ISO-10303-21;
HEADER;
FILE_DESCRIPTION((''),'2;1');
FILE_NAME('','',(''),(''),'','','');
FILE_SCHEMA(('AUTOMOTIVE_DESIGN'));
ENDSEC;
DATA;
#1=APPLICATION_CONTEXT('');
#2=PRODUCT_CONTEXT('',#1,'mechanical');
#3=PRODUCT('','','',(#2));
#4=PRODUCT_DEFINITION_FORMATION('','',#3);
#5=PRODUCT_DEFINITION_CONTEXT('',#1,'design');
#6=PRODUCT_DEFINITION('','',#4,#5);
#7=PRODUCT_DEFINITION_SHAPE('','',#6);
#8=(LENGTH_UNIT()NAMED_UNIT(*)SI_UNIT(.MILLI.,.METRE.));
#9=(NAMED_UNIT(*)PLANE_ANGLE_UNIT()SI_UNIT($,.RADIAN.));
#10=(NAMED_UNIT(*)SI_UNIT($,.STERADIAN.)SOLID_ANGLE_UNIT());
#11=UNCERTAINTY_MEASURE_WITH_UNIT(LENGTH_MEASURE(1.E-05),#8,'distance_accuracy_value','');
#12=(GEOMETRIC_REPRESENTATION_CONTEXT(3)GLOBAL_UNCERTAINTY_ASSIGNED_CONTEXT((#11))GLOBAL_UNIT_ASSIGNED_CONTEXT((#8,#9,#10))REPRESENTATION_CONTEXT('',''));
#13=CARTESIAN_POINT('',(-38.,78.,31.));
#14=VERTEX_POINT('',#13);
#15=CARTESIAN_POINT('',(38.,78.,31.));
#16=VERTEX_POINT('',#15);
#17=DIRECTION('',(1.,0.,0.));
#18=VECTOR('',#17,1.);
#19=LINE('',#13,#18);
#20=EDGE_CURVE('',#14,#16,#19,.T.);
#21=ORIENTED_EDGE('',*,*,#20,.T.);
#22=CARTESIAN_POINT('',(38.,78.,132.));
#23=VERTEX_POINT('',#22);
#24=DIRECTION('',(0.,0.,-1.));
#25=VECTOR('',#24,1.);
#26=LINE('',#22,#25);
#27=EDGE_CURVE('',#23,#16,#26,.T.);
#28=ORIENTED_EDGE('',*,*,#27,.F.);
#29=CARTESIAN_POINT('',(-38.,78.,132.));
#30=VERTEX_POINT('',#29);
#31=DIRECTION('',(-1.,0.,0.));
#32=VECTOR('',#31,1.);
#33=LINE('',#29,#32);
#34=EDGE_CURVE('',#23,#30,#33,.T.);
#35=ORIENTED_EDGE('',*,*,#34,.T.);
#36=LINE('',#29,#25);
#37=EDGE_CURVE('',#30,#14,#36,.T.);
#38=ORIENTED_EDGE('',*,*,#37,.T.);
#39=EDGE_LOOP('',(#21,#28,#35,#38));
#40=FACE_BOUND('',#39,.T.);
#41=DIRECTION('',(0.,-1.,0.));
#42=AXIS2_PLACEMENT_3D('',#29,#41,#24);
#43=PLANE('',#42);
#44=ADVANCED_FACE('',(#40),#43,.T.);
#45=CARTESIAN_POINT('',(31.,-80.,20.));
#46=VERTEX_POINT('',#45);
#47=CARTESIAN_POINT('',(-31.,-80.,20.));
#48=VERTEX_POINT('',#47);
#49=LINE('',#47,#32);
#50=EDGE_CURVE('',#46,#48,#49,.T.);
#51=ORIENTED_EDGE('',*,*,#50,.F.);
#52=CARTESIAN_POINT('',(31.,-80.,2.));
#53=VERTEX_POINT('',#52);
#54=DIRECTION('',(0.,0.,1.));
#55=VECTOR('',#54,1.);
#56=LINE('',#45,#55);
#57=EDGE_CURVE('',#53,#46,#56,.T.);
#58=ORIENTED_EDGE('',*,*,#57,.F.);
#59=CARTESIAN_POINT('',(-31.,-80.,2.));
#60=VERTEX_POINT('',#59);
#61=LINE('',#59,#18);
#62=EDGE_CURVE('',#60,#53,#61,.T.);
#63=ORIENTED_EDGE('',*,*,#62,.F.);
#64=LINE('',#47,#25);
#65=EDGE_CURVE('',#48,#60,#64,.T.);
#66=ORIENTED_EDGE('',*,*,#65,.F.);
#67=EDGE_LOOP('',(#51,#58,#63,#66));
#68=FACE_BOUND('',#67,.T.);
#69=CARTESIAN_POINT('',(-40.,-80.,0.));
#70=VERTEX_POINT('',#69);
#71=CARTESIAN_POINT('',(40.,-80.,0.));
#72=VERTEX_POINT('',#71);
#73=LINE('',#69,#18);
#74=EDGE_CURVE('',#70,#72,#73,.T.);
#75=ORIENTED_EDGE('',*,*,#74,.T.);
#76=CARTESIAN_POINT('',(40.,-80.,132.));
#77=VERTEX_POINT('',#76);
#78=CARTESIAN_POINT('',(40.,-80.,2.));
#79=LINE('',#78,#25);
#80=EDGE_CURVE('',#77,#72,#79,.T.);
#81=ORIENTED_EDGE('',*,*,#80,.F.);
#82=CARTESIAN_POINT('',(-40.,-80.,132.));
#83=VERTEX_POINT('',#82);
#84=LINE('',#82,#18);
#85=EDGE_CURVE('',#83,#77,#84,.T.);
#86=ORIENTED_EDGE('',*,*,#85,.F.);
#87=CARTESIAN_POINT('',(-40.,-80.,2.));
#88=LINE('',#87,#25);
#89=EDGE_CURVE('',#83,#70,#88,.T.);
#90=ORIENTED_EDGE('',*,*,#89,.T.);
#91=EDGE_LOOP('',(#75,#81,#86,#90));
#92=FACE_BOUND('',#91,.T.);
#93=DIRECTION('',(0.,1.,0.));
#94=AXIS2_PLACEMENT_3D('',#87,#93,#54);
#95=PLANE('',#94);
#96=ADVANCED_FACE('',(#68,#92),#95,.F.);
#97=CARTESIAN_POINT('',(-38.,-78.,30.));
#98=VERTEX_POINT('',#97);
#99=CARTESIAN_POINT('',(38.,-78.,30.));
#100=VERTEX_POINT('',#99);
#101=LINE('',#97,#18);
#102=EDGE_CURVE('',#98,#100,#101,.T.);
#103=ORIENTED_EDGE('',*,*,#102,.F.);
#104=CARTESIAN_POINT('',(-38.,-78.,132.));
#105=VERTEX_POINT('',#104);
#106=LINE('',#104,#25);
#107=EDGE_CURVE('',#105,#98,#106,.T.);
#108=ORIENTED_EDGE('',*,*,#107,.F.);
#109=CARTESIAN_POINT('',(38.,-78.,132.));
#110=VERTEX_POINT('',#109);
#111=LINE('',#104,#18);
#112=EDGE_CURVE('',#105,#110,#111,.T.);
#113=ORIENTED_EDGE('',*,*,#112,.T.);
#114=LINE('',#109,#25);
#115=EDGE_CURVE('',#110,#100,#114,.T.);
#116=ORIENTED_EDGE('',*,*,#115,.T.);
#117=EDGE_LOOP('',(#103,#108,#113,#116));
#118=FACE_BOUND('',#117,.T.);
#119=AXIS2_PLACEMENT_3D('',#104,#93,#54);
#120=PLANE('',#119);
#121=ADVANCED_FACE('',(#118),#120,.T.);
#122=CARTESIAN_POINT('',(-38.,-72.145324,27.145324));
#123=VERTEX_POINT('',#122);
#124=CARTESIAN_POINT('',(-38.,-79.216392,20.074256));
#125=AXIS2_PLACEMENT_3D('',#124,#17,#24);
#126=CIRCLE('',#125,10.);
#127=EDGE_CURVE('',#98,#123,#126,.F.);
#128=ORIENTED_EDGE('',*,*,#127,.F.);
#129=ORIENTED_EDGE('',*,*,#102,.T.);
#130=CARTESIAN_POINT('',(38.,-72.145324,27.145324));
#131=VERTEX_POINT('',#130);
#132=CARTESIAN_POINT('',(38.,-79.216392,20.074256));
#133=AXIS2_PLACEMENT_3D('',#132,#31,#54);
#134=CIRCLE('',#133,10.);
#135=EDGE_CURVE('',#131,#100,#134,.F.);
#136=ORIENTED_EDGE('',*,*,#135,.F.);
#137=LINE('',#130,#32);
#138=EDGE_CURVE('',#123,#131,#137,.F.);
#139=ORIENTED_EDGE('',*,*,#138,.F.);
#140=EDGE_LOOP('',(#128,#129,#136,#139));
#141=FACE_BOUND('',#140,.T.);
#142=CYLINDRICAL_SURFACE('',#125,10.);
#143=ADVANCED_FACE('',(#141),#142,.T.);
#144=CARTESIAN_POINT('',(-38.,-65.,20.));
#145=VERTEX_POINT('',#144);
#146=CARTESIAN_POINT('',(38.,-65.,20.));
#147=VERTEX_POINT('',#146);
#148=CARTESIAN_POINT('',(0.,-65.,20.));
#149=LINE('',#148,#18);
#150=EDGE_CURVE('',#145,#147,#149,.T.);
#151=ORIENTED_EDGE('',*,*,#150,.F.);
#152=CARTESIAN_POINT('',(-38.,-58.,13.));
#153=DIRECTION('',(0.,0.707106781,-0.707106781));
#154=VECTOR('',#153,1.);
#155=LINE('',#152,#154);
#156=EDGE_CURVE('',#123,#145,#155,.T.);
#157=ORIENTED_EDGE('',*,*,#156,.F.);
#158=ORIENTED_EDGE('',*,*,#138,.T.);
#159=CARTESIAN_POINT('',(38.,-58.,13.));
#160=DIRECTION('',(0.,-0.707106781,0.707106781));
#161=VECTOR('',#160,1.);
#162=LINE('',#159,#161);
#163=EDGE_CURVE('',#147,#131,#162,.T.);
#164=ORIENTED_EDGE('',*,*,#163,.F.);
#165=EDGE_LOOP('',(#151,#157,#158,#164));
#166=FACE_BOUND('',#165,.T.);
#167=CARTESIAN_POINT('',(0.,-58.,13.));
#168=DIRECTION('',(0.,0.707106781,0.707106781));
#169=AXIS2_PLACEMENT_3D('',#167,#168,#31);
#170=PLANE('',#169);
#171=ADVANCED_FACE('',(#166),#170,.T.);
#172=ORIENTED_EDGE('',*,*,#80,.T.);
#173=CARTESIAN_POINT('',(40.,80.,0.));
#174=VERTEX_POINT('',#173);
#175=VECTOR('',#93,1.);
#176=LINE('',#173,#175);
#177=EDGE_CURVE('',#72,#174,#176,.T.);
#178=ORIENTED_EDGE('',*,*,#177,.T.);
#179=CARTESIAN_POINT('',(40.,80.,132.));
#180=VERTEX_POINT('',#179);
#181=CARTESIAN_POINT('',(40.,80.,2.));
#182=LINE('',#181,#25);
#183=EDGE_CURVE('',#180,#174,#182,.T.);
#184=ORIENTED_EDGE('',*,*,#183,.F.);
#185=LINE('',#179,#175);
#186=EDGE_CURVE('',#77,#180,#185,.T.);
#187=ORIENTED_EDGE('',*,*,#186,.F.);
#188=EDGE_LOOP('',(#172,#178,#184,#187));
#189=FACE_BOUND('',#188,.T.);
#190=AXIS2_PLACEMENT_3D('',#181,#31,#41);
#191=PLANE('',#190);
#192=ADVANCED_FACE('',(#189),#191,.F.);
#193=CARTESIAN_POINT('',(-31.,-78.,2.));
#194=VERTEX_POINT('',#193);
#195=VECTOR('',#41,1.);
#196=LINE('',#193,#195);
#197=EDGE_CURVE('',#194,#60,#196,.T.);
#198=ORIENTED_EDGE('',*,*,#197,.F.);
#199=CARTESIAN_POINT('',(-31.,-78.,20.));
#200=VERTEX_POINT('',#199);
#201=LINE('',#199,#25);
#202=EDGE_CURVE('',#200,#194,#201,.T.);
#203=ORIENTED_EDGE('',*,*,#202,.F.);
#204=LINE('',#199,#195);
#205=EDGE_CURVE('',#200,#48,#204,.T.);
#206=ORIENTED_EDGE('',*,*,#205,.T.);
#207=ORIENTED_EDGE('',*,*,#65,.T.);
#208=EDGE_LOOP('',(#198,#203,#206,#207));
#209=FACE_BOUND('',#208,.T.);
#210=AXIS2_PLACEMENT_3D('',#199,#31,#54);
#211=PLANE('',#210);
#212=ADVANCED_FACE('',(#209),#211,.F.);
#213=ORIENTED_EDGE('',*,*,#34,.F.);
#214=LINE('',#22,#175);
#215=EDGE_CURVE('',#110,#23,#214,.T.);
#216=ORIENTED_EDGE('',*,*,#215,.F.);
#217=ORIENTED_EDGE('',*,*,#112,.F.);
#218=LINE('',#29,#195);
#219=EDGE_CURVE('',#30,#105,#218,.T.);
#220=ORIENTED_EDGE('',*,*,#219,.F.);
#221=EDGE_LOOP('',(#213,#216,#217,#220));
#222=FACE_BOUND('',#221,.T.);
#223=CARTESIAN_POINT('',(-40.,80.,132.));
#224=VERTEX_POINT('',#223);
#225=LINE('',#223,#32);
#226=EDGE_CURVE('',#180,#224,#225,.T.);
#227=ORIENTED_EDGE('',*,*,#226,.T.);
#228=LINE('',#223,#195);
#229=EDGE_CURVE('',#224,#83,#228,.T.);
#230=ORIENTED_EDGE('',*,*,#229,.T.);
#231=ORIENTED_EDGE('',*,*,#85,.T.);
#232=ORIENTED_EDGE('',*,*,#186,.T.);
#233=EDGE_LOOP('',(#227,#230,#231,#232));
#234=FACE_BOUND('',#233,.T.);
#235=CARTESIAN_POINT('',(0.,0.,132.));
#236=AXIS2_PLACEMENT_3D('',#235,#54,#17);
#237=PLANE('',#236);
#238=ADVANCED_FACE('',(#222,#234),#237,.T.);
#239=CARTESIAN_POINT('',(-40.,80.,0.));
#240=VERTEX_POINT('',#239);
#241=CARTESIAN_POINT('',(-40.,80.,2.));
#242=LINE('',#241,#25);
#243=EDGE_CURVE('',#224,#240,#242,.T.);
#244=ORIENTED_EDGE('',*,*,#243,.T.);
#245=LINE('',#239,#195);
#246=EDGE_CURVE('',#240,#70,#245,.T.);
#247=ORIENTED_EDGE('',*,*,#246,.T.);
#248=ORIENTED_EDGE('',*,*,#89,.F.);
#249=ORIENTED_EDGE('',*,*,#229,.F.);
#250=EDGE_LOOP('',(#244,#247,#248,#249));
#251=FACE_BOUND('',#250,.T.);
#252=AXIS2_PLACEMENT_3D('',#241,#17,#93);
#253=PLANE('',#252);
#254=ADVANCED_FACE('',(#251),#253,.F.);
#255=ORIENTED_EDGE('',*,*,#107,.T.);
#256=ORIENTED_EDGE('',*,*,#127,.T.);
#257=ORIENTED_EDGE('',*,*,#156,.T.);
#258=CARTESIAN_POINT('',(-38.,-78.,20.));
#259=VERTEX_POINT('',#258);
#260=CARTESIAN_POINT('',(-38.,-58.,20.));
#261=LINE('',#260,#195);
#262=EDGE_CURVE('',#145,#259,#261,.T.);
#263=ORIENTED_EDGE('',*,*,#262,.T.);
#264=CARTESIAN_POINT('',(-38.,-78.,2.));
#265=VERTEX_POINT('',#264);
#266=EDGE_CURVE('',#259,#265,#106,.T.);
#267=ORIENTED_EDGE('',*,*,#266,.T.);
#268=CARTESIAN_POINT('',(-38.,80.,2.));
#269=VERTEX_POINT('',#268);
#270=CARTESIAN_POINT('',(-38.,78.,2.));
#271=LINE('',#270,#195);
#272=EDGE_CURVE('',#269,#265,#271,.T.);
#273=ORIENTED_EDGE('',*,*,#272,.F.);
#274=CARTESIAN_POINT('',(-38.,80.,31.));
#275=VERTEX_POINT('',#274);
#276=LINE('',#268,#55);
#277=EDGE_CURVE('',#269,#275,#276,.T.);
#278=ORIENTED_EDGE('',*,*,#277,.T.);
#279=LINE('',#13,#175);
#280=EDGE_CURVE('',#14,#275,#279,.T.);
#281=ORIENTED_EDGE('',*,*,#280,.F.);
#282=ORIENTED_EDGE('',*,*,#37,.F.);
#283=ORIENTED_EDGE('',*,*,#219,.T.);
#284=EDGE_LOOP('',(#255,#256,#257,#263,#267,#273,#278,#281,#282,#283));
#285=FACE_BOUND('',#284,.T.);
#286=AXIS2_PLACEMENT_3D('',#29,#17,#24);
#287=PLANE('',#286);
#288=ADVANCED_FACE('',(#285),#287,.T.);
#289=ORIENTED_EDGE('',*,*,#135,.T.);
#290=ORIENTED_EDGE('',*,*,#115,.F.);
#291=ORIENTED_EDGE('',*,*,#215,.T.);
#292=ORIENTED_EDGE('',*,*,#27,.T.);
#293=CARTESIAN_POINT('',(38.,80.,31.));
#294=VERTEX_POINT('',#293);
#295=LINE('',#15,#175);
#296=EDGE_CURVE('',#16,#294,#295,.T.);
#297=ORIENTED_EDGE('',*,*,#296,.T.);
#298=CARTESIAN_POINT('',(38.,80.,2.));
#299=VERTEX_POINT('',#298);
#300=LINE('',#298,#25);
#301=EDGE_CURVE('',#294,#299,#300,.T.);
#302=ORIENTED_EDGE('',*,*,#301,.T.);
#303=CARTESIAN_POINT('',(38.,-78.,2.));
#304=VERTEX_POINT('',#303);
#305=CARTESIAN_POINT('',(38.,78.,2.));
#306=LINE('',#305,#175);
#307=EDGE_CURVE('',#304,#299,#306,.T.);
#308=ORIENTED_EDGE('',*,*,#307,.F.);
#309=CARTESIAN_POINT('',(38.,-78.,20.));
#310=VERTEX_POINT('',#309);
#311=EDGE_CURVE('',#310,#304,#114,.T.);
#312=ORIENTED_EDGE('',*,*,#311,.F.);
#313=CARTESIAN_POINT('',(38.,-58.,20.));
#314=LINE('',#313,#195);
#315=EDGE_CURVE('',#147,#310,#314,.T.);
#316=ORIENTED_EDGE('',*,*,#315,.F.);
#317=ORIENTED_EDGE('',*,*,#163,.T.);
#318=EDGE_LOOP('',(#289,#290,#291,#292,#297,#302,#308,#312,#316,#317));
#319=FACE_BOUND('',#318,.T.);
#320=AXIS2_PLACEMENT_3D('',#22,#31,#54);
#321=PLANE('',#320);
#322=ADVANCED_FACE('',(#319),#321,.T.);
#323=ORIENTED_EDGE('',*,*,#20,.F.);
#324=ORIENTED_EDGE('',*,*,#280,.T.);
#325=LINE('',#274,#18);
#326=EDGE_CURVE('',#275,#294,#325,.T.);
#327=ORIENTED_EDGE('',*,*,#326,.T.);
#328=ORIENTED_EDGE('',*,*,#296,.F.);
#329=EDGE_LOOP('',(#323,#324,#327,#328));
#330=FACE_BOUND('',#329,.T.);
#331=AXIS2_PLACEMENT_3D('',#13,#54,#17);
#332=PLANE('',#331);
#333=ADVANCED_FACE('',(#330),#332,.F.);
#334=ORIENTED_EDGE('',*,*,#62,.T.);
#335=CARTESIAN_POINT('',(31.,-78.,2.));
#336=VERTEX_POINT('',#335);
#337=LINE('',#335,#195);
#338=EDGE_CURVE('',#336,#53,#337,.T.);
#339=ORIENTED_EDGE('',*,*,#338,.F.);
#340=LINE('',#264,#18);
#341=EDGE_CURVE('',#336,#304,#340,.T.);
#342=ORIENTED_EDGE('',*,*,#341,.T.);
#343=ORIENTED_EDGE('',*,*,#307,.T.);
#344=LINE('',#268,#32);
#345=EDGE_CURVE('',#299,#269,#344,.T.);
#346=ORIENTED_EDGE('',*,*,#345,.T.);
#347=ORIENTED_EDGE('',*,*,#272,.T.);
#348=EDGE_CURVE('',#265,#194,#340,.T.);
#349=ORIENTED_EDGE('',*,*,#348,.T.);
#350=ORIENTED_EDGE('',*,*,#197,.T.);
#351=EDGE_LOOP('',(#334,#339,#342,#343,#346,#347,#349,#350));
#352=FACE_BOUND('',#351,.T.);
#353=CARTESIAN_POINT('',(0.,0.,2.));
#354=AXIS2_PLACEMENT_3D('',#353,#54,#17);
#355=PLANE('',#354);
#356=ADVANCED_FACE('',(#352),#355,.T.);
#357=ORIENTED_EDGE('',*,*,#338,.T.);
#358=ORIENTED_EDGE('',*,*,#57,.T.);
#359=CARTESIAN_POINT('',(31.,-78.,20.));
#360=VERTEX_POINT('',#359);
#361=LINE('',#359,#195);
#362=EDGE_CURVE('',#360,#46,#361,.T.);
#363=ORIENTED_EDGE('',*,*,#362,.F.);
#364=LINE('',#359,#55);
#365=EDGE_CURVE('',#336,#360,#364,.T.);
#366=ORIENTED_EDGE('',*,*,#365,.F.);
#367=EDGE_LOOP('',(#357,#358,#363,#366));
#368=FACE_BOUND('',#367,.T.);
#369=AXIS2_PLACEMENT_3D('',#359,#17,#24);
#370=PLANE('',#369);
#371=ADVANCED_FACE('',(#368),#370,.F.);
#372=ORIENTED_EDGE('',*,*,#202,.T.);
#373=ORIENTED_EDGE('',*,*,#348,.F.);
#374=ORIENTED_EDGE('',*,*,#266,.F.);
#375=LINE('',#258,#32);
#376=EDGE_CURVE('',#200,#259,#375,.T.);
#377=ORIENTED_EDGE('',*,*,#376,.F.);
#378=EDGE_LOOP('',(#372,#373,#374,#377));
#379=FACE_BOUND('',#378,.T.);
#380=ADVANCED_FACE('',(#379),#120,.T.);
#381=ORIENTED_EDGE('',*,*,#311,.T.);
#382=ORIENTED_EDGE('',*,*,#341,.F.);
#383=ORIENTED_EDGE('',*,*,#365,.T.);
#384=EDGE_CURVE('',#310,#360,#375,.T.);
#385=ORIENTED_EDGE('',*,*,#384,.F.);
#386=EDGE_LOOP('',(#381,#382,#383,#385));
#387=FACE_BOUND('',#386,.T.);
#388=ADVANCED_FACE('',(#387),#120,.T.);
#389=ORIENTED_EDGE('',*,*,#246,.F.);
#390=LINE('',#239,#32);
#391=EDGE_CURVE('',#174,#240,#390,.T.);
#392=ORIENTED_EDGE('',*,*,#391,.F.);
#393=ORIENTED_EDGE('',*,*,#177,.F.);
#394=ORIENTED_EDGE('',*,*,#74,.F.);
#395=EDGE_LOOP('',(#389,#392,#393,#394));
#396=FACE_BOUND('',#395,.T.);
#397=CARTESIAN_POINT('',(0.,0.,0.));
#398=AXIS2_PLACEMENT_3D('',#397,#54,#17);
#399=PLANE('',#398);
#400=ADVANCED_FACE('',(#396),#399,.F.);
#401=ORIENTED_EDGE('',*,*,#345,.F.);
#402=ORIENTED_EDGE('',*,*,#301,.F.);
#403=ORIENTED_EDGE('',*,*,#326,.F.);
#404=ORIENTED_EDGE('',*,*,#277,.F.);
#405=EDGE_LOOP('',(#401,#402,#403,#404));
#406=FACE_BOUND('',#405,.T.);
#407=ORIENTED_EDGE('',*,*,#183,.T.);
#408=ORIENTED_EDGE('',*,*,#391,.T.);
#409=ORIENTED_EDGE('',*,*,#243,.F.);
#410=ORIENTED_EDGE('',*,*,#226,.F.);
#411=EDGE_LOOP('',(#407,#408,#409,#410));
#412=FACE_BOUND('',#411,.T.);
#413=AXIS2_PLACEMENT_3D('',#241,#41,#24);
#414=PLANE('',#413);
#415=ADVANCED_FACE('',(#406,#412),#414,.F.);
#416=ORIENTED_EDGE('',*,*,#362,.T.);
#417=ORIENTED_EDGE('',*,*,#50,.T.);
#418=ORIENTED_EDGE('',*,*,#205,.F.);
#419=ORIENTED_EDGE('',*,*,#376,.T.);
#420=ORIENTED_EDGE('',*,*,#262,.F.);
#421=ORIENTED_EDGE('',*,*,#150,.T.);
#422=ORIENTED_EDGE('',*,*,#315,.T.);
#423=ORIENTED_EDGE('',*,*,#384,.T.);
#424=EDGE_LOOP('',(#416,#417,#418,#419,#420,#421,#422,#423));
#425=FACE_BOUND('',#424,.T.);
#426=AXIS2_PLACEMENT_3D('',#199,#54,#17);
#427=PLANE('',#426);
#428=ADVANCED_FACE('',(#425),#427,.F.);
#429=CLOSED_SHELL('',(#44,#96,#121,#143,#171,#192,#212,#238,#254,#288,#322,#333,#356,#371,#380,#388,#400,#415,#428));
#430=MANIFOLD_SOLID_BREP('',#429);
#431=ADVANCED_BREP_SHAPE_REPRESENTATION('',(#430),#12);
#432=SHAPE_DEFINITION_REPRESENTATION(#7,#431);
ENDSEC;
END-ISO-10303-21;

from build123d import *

# Parameters (mm, degrees)
SKETCH1_W           = 80
SKETCH1_H           = 160
BOSS_EXTRUDE1_DEPTH = 2
SKETCH2_W           = 80
SKETCH2_H           = 160
SKETCH2_W_2         = 76
SKETCH2_H_2         = 156
BOSS_EXTRUDE2_DEPTH = 130
SKETCH3_W           = 62
SKETCH3_H           = 18
CUT_EXTRUDE1_DEPTH  = 2
SKETCH5_W           = 76
SKETCH5_H           = 29
CUT_EXTRUDE2_DEPTH  = 2
SKETCH7_W           = 76
SKETCH7_H           = 10
BOSS_EXTRUDE3_DEPTH = 20
CHAMFER1_SIZE       = 17
FILLET1_R           = 10


with BuildPart() as part:
    # Sketch1 → Boss-Extrude1 (new body)
    with BuildSketch(Plane.XY):
        Rectangle(SKETCH1_W, SKETCH1_H)
    extrude(amount=BOSS_EXTRUDE1_DEPTH)

    # Sketch2 → Boss-Extrude2 (add)
    with BuildSketch(Plane.XY.offset(2)):
        Rectangle(SKETCH2_W, SKETCH2_H)
        Rectangle(SKETCH2_W_2, SKETCH2_H_2, mode=Mode.SUBTRACT)
    extrude(amount=BOSS_EXTRUDE2_DEPTH)

    # Sketch3 → Cut-Extrude1 (cut)
    with BuildSketch(Plane.XZ.offset(80)):
        with Locations((0, 11)):
            Rectangle(SKETCH3_W, SKETCH3_H)
    extrude(amount=-CUT_EXTRUDE1_DEPTH, mode=Mode.SUBTRACT)

    # Sketch5 → Cut-Extrude2 (cut)
    with BuildSketch(Plane(origin=(0, 80, 0), x_dir=(1, 0, 0), z_dir=(0, 1, 0))):
        with Locations((0, -16.5)):
            Rectangle(SKETCH5_W, SKETCH5_H)
    extrude(amount=-CUT_EXTRUDE2_DEPTH, mode=Mode.SUBTRACT)

    # Sketch7 → Boss-Extrude3 (add)
    with BuildSketch(Plane(origin=(0, -78, 0), x_dir=(1, 0, 0), z_dir=(0, 1, 0))):
        with Locations((0, -25)):
            Rectangle(SKETCH7_W, SKETCH7_H)
    extrude(amount=BOSS_EXTRUDE3_DEPTH)

    # Chamfer1
    # the kernel refuses this chamfer: 17 mm, written as the material it takes off along each edge
    with BuildSketch(Plane(origin=(38, -58, 30), x_dir=(0, 0.027495876610586237, -0.9996219169112966), z_dir=(-1, 0, 0))) as chamfer1_piece_1:
        Polygon((CHAMFER1_SIZE * 0.999621916911, CHAMFER1_SIZE * 0.0274958766106), (-CHAMFER1_SIZE * 0.0274958766106, CHAMFER1_SIZE * 0.999621916911), (0, 0), align=None)
    extrude(amount=76, mode=Mode.SUBTRACT)

    # Fillet1
    # the kernel refuses this fillet: 10 mm, written as the material it takes off along each edge
    with BuildSketch(Plane(origin=(38, -75, 30), x_dir=(0, -1.0, 2.265447089177998e-12), z_dir=(-1, 0, 0))) as fillet1_piece_1:
        with BuildLine():
            CenterArc((4.216391769, -9.925743854), FILLET1_R, 96.986713585, 38.013286415)
            Line((-2.854676043, -2.854676043), (0, 0))
            Line((0, 0), (3, 0))
        make_face()
    extrude(amount=76, mode=Mode.SUBTRACT)


solid = part.part
